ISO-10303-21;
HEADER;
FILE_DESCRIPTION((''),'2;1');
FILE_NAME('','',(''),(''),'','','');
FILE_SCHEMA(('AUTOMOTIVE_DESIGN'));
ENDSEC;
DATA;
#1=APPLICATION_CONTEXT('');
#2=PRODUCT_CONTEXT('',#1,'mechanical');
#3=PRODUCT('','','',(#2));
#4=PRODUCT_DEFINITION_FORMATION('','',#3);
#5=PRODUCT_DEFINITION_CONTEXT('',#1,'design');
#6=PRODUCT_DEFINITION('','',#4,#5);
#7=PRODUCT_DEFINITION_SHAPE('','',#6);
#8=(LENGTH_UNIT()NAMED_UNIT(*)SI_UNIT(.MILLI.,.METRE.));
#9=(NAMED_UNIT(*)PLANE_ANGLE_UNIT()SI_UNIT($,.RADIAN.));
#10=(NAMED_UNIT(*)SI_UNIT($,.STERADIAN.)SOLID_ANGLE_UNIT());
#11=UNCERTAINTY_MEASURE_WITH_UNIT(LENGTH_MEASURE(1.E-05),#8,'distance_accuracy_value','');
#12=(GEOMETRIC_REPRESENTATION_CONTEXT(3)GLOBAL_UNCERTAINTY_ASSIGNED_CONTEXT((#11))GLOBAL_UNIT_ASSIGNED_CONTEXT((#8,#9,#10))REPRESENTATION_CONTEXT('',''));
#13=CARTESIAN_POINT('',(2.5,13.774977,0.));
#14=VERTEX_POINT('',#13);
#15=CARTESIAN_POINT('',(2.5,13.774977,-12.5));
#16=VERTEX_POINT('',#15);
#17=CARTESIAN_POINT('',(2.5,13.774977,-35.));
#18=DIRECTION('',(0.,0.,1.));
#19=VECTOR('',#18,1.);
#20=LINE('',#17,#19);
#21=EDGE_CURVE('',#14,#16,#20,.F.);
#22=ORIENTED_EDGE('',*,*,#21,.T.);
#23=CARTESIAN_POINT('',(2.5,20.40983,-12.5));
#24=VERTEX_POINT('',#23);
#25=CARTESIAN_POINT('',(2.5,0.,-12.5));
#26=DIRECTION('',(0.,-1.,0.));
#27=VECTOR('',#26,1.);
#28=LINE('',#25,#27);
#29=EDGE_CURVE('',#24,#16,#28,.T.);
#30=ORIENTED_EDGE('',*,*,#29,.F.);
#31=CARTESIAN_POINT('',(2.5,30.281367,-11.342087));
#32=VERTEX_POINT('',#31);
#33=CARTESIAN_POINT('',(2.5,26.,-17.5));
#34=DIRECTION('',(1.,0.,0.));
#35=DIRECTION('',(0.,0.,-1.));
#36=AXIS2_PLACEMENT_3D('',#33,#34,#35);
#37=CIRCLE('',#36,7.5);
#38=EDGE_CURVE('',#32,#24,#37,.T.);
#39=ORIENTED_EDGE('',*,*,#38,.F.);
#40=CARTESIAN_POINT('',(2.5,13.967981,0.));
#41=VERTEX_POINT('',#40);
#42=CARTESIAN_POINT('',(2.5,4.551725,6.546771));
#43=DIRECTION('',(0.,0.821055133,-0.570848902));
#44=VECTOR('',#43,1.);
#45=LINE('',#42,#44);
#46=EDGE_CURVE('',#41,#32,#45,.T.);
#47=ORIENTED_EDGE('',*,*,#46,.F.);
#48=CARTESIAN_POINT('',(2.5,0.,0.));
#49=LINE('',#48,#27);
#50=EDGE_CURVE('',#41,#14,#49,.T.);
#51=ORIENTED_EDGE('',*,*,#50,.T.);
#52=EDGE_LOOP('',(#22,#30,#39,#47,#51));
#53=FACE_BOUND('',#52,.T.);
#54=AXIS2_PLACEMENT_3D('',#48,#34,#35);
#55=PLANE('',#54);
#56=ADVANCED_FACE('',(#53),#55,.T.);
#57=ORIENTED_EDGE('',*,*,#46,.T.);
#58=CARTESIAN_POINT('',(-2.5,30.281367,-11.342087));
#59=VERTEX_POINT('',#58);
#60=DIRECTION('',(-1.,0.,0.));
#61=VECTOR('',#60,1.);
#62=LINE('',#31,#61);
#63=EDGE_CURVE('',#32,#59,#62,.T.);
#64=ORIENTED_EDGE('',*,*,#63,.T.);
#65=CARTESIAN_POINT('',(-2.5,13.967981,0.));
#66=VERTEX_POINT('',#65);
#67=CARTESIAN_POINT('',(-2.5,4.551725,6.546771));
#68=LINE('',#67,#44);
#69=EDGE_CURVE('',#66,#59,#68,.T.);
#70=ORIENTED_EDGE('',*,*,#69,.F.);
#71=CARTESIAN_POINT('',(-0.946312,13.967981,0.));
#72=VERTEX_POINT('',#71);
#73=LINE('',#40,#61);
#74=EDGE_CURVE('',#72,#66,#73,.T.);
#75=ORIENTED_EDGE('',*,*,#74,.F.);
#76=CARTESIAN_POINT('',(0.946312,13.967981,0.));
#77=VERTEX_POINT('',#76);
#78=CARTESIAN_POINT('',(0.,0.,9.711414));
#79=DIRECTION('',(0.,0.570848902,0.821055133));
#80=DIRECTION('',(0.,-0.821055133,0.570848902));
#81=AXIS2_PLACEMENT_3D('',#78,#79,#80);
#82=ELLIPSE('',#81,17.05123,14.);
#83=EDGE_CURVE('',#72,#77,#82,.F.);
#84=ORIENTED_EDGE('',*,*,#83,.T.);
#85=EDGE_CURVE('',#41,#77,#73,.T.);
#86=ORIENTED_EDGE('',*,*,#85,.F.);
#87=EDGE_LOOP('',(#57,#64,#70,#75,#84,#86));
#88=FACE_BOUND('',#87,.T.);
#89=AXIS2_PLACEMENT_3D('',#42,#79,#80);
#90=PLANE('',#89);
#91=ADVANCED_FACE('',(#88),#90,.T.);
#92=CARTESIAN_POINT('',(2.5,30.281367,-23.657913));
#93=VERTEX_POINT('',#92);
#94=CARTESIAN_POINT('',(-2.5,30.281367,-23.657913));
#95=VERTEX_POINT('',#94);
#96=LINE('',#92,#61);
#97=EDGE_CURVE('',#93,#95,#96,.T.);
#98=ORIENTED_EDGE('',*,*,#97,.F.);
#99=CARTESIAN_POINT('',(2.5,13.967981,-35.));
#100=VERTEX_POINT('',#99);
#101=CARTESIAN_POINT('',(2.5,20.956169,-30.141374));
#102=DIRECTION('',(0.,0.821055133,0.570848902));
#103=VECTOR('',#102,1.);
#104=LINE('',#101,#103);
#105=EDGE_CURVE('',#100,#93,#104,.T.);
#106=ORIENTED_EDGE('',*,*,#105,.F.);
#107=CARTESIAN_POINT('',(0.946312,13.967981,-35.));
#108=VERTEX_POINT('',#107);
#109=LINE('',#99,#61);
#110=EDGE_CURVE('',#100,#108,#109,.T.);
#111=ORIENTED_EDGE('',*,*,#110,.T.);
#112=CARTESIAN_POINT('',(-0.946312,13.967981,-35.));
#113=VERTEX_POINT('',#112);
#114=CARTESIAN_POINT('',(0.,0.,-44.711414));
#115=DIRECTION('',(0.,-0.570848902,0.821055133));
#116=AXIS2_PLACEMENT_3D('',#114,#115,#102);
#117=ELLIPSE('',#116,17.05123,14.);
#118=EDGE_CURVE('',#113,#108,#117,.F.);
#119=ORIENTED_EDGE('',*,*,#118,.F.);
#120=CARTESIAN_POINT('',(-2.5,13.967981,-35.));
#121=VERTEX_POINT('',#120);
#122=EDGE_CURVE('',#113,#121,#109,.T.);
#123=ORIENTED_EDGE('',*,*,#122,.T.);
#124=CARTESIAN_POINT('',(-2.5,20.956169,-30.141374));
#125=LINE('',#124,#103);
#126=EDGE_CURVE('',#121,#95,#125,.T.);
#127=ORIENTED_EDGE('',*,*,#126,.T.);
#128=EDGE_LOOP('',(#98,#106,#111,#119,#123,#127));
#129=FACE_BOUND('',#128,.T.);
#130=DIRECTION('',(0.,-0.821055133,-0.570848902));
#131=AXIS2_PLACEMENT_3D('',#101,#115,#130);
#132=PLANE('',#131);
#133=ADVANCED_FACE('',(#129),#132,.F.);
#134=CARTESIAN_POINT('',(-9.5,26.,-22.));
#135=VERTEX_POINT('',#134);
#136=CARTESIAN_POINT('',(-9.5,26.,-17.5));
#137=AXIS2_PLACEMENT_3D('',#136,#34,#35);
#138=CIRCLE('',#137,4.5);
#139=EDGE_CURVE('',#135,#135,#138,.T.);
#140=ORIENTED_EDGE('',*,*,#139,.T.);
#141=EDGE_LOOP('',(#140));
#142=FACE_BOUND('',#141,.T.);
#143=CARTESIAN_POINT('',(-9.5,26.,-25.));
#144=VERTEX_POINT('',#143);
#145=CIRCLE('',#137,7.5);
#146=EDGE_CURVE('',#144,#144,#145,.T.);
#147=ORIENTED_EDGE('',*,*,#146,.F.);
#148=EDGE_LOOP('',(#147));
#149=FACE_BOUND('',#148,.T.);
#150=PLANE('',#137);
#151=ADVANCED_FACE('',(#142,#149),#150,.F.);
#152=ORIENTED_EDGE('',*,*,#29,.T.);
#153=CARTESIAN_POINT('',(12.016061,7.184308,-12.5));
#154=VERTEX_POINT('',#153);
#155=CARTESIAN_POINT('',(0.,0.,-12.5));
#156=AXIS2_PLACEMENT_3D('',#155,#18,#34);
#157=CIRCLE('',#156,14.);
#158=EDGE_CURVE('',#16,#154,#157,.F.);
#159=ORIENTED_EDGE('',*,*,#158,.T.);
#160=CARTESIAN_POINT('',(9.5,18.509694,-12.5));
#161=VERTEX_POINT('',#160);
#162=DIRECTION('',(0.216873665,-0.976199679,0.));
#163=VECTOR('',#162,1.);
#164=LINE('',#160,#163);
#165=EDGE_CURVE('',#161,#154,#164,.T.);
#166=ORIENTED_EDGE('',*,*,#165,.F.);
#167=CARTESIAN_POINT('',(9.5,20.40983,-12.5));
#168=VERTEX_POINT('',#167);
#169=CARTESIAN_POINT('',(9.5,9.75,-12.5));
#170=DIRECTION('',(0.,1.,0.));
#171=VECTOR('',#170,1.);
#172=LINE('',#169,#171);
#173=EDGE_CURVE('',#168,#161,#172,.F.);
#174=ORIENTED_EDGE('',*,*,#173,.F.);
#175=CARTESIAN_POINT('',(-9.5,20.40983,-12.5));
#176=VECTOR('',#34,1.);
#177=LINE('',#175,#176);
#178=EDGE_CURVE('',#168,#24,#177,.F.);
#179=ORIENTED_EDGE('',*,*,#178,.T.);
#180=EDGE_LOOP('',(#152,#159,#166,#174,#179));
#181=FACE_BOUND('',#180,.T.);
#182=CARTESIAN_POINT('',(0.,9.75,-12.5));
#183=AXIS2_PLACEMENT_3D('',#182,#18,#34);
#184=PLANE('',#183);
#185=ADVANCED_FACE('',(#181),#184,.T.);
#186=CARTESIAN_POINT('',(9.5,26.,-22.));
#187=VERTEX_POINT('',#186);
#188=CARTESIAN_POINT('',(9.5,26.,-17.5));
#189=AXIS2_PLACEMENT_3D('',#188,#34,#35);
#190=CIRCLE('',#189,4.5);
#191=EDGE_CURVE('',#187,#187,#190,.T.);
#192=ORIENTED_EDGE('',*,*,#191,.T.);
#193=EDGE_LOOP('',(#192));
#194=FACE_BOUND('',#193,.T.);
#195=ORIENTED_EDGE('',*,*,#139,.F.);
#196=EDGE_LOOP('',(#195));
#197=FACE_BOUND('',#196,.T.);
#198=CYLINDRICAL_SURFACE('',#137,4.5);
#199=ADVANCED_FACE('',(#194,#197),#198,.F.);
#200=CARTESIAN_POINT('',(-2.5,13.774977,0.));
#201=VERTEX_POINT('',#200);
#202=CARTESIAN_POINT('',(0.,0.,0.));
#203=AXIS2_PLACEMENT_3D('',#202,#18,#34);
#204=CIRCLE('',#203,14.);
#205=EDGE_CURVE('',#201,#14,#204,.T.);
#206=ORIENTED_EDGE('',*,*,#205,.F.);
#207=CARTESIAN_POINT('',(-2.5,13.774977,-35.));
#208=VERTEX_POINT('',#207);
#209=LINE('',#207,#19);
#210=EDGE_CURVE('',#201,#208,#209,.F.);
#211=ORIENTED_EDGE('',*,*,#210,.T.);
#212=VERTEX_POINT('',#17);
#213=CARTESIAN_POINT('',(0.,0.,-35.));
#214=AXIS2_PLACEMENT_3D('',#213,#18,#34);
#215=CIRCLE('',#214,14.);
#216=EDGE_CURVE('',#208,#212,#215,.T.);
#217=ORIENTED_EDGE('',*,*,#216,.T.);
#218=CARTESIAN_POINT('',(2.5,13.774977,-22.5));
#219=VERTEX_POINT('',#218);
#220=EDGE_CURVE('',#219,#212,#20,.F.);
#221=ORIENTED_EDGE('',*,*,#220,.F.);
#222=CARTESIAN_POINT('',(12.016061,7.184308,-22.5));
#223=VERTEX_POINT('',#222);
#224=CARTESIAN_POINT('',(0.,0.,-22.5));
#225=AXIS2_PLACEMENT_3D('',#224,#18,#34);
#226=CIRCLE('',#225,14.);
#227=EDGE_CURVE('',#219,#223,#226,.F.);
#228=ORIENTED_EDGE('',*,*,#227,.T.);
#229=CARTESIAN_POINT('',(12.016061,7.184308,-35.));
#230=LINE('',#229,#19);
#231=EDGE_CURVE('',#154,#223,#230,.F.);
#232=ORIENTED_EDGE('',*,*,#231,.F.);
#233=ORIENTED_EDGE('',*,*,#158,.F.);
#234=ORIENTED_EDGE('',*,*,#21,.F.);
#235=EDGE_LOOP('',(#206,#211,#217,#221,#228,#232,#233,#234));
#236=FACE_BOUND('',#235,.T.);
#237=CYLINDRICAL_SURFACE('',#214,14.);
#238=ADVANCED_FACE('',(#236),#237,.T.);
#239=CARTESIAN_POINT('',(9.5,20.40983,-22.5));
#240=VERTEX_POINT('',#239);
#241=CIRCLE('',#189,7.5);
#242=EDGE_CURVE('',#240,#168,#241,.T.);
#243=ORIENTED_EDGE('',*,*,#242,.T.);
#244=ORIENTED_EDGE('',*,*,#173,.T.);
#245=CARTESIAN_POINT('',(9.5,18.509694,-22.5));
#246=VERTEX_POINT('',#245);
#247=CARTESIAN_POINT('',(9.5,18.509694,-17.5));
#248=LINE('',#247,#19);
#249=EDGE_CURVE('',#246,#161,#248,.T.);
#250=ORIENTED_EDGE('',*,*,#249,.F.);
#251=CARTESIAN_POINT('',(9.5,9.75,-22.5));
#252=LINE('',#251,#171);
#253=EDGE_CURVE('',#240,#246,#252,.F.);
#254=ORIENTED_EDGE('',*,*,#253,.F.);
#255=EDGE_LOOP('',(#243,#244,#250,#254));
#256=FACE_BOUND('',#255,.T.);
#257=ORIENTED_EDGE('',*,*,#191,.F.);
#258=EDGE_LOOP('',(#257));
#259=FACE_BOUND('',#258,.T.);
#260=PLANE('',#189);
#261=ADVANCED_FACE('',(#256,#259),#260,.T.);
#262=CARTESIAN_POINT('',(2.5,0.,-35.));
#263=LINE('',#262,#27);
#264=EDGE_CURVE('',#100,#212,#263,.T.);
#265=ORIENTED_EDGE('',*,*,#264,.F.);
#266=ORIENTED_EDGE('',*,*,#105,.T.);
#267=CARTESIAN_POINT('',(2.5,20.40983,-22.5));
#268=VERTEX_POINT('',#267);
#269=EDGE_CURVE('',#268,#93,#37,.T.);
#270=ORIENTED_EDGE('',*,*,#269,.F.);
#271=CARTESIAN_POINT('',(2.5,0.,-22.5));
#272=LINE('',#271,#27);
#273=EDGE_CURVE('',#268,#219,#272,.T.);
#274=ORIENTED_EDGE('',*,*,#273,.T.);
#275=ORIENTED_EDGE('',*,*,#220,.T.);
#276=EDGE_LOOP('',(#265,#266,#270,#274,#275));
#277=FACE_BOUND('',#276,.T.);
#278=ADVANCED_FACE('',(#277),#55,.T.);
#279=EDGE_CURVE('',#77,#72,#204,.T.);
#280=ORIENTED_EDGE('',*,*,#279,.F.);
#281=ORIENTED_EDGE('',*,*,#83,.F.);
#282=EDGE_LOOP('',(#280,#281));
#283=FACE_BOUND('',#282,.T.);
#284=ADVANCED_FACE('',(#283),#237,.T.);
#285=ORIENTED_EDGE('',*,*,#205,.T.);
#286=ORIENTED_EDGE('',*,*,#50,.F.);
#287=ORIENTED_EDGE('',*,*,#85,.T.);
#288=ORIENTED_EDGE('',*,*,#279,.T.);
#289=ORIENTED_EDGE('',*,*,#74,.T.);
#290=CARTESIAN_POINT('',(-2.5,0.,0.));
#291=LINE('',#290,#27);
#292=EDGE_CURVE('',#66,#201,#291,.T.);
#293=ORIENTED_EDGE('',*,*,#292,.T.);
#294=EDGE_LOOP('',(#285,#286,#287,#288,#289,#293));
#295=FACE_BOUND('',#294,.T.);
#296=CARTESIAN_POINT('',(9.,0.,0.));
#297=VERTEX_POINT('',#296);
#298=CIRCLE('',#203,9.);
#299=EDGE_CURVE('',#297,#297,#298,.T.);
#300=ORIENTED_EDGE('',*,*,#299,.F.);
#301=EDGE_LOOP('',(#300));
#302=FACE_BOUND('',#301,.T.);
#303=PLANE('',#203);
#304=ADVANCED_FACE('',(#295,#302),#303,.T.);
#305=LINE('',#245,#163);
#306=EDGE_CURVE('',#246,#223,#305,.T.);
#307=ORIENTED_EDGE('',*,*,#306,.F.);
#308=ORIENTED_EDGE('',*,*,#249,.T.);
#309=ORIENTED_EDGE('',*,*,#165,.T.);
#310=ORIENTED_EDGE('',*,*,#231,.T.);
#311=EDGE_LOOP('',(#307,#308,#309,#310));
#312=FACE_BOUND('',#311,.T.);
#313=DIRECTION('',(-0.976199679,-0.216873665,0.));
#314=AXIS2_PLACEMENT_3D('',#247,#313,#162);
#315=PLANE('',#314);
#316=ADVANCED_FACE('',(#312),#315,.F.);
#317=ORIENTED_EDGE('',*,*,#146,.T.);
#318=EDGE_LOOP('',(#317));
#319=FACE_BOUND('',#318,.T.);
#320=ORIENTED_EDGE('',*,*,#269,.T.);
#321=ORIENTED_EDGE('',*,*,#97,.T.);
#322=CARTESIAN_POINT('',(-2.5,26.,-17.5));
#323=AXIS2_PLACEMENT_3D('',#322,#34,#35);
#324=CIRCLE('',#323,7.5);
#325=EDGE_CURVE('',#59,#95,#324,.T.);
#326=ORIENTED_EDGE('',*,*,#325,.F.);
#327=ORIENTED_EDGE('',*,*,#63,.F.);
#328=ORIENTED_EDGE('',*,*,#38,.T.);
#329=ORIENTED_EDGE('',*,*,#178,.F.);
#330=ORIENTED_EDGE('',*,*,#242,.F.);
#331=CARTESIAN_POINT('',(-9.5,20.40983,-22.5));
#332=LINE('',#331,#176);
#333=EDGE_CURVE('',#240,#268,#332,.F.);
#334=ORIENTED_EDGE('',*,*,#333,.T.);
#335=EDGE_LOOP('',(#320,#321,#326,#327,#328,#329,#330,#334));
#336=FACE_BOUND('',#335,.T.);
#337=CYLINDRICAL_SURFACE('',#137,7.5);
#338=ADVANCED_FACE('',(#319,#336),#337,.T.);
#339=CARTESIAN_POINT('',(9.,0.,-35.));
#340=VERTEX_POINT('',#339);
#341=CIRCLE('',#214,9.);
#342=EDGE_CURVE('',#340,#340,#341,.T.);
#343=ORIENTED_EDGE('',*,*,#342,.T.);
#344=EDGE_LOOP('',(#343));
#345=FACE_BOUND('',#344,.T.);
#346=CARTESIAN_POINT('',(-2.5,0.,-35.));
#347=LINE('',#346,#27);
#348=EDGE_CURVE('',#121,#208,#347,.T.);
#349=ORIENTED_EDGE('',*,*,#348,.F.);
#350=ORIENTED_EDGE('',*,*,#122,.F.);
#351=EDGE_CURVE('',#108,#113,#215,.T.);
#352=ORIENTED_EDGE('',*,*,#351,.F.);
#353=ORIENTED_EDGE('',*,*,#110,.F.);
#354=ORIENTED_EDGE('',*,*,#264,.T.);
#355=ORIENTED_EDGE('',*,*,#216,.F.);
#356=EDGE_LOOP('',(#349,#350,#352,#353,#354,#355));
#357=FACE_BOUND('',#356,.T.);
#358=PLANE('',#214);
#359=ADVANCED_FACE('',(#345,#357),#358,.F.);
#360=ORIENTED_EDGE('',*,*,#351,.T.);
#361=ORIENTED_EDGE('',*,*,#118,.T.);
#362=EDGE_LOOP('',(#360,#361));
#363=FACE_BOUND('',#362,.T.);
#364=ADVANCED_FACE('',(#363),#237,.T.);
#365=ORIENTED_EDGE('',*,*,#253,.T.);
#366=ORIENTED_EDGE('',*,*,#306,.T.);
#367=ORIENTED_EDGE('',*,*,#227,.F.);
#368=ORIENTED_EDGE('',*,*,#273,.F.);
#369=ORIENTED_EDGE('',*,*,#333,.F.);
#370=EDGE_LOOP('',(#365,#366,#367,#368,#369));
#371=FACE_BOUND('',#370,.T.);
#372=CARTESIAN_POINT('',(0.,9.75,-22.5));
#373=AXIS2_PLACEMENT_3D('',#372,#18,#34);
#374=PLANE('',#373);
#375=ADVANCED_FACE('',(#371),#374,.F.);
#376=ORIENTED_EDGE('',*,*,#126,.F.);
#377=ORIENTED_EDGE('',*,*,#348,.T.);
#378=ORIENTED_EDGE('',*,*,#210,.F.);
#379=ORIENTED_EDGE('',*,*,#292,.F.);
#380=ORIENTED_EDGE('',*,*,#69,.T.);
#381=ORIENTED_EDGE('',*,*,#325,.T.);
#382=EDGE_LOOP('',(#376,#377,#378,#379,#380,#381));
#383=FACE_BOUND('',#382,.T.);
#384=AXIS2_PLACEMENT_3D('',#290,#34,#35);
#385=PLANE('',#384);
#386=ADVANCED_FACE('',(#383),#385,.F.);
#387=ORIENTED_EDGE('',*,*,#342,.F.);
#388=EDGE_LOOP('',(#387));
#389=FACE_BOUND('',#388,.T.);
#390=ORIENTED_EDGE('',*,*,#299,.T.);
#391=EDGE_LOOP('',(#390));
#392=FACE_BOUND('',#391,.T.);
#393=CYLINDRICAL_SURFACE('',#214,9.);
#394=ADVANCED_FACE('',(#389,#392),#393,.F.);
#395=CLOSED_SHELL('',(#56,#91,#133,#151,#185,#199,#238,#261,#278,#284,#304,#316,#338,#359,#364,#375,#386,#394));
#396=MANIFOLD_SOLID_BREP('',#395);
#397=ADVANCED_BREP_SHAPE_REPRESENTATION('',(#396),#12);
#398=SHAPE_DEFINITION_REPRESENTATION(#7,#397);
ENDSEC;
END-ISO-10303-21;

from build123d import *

# Parameters (mm, degrees)
SKETCH1_R           = 14
SKETCH1_R_2         = 9
BOSS_EXTRUDE1_DEPTH = 35
SKETCH2_R           = 7.5
SKETCH2_R_2         = 4.5
BOSS_EXTRUDE2_DEPTH = 9.5
BOSS_EXTRUDE4_DEPTH = 2.5
RIB6_START          = -5
RIB6_DEPTH          = 10


with BuildPart() as part:
    # Sketch1 → Boss-Extrude1 (new body)
    with BuildSketch(Plane.XY):
        Circle(SKETCH1_R)
        Circle(SKETCH1_R_2, mode=Mode.SUBTRACT)
    extrude(amount=-BOSS_EXTRUDE1_DEPTH)



with BuildPart() as body_2:
    # Sketch2 → Boss-Extrude2 (new, symmetric)
    with BuildSketch(Plane(origin=(0, 0, 0), x_dir=(0, 0, -1), z_dir=(1, 0, 0))):
        with Locations((17.5, 26)):
            Circle(SKETCH2_R)
        with Locations((17.5, 26)):
            Circle(SKETCH2_R_2, mode=Mode.SUBTRACT)
    extrude(amount=BOSS_EXTRUDE2_DEPTH, both=True)


with BuildPart() as part_1:
    add(part.part)

    add(body_2.part)  # Boss-Extrude4 merges body 2
    # Sketch4 → Boss-Extrude4 (add, symmetric)
    with BuildSketch(Plane(origin=(0, 0, 0), x_dir=(0, 0, -1), z_dir=(1, 0, 0))):
        with BuildLine():
            Line((11.342086503, 30.281366763), (0, 13.967981008))
            Line((0, 13.967981008), (0, 13.516905435))
            Line((0, 13.516905435), (35, 13.771632184))
            Line((35, 13.771632184), (35, 13.967981008))
            Line((35, 13.967981008), (23.657913497, 30.281366763))
            ThreePointArc((23.657913497, 30.281366763), (24.65661761, 28.243395726), (25, 26))
            ThreePointArc((25, 26), (15.256604274, 18.84338239), (11.342086503, 30.281366763))
        make_face()
    extrude(amount=BOSS_EXTRUDE4_DEPTH, both=True)

    # Rib6: read off the stored shape, not the designer's step
    # Rib6 outline → Rib6 (add)
    with BuildSketch(Plane.XY.offset(-17.5).offset(RIB6_START)):
        with BuildLine():
            Line((9.5, 20.409830056), (2.5, 20.409830056))
            Line((2.5, 20.409830056), (2.5, 13.774977314))
            ThreePointArc((2.5, 13.774977314), (7.971087724, 11.509203296), (12.016061116, 7.18430757))
            Line((12.016061116, 7.18430757), (9.5, 18.509693936))
            Line((9.5, 18.509693936), (9.5, 20.409830056))
        make_face()
    extrude(amount=RIB6_DEPTH)


solid = part_1.part
